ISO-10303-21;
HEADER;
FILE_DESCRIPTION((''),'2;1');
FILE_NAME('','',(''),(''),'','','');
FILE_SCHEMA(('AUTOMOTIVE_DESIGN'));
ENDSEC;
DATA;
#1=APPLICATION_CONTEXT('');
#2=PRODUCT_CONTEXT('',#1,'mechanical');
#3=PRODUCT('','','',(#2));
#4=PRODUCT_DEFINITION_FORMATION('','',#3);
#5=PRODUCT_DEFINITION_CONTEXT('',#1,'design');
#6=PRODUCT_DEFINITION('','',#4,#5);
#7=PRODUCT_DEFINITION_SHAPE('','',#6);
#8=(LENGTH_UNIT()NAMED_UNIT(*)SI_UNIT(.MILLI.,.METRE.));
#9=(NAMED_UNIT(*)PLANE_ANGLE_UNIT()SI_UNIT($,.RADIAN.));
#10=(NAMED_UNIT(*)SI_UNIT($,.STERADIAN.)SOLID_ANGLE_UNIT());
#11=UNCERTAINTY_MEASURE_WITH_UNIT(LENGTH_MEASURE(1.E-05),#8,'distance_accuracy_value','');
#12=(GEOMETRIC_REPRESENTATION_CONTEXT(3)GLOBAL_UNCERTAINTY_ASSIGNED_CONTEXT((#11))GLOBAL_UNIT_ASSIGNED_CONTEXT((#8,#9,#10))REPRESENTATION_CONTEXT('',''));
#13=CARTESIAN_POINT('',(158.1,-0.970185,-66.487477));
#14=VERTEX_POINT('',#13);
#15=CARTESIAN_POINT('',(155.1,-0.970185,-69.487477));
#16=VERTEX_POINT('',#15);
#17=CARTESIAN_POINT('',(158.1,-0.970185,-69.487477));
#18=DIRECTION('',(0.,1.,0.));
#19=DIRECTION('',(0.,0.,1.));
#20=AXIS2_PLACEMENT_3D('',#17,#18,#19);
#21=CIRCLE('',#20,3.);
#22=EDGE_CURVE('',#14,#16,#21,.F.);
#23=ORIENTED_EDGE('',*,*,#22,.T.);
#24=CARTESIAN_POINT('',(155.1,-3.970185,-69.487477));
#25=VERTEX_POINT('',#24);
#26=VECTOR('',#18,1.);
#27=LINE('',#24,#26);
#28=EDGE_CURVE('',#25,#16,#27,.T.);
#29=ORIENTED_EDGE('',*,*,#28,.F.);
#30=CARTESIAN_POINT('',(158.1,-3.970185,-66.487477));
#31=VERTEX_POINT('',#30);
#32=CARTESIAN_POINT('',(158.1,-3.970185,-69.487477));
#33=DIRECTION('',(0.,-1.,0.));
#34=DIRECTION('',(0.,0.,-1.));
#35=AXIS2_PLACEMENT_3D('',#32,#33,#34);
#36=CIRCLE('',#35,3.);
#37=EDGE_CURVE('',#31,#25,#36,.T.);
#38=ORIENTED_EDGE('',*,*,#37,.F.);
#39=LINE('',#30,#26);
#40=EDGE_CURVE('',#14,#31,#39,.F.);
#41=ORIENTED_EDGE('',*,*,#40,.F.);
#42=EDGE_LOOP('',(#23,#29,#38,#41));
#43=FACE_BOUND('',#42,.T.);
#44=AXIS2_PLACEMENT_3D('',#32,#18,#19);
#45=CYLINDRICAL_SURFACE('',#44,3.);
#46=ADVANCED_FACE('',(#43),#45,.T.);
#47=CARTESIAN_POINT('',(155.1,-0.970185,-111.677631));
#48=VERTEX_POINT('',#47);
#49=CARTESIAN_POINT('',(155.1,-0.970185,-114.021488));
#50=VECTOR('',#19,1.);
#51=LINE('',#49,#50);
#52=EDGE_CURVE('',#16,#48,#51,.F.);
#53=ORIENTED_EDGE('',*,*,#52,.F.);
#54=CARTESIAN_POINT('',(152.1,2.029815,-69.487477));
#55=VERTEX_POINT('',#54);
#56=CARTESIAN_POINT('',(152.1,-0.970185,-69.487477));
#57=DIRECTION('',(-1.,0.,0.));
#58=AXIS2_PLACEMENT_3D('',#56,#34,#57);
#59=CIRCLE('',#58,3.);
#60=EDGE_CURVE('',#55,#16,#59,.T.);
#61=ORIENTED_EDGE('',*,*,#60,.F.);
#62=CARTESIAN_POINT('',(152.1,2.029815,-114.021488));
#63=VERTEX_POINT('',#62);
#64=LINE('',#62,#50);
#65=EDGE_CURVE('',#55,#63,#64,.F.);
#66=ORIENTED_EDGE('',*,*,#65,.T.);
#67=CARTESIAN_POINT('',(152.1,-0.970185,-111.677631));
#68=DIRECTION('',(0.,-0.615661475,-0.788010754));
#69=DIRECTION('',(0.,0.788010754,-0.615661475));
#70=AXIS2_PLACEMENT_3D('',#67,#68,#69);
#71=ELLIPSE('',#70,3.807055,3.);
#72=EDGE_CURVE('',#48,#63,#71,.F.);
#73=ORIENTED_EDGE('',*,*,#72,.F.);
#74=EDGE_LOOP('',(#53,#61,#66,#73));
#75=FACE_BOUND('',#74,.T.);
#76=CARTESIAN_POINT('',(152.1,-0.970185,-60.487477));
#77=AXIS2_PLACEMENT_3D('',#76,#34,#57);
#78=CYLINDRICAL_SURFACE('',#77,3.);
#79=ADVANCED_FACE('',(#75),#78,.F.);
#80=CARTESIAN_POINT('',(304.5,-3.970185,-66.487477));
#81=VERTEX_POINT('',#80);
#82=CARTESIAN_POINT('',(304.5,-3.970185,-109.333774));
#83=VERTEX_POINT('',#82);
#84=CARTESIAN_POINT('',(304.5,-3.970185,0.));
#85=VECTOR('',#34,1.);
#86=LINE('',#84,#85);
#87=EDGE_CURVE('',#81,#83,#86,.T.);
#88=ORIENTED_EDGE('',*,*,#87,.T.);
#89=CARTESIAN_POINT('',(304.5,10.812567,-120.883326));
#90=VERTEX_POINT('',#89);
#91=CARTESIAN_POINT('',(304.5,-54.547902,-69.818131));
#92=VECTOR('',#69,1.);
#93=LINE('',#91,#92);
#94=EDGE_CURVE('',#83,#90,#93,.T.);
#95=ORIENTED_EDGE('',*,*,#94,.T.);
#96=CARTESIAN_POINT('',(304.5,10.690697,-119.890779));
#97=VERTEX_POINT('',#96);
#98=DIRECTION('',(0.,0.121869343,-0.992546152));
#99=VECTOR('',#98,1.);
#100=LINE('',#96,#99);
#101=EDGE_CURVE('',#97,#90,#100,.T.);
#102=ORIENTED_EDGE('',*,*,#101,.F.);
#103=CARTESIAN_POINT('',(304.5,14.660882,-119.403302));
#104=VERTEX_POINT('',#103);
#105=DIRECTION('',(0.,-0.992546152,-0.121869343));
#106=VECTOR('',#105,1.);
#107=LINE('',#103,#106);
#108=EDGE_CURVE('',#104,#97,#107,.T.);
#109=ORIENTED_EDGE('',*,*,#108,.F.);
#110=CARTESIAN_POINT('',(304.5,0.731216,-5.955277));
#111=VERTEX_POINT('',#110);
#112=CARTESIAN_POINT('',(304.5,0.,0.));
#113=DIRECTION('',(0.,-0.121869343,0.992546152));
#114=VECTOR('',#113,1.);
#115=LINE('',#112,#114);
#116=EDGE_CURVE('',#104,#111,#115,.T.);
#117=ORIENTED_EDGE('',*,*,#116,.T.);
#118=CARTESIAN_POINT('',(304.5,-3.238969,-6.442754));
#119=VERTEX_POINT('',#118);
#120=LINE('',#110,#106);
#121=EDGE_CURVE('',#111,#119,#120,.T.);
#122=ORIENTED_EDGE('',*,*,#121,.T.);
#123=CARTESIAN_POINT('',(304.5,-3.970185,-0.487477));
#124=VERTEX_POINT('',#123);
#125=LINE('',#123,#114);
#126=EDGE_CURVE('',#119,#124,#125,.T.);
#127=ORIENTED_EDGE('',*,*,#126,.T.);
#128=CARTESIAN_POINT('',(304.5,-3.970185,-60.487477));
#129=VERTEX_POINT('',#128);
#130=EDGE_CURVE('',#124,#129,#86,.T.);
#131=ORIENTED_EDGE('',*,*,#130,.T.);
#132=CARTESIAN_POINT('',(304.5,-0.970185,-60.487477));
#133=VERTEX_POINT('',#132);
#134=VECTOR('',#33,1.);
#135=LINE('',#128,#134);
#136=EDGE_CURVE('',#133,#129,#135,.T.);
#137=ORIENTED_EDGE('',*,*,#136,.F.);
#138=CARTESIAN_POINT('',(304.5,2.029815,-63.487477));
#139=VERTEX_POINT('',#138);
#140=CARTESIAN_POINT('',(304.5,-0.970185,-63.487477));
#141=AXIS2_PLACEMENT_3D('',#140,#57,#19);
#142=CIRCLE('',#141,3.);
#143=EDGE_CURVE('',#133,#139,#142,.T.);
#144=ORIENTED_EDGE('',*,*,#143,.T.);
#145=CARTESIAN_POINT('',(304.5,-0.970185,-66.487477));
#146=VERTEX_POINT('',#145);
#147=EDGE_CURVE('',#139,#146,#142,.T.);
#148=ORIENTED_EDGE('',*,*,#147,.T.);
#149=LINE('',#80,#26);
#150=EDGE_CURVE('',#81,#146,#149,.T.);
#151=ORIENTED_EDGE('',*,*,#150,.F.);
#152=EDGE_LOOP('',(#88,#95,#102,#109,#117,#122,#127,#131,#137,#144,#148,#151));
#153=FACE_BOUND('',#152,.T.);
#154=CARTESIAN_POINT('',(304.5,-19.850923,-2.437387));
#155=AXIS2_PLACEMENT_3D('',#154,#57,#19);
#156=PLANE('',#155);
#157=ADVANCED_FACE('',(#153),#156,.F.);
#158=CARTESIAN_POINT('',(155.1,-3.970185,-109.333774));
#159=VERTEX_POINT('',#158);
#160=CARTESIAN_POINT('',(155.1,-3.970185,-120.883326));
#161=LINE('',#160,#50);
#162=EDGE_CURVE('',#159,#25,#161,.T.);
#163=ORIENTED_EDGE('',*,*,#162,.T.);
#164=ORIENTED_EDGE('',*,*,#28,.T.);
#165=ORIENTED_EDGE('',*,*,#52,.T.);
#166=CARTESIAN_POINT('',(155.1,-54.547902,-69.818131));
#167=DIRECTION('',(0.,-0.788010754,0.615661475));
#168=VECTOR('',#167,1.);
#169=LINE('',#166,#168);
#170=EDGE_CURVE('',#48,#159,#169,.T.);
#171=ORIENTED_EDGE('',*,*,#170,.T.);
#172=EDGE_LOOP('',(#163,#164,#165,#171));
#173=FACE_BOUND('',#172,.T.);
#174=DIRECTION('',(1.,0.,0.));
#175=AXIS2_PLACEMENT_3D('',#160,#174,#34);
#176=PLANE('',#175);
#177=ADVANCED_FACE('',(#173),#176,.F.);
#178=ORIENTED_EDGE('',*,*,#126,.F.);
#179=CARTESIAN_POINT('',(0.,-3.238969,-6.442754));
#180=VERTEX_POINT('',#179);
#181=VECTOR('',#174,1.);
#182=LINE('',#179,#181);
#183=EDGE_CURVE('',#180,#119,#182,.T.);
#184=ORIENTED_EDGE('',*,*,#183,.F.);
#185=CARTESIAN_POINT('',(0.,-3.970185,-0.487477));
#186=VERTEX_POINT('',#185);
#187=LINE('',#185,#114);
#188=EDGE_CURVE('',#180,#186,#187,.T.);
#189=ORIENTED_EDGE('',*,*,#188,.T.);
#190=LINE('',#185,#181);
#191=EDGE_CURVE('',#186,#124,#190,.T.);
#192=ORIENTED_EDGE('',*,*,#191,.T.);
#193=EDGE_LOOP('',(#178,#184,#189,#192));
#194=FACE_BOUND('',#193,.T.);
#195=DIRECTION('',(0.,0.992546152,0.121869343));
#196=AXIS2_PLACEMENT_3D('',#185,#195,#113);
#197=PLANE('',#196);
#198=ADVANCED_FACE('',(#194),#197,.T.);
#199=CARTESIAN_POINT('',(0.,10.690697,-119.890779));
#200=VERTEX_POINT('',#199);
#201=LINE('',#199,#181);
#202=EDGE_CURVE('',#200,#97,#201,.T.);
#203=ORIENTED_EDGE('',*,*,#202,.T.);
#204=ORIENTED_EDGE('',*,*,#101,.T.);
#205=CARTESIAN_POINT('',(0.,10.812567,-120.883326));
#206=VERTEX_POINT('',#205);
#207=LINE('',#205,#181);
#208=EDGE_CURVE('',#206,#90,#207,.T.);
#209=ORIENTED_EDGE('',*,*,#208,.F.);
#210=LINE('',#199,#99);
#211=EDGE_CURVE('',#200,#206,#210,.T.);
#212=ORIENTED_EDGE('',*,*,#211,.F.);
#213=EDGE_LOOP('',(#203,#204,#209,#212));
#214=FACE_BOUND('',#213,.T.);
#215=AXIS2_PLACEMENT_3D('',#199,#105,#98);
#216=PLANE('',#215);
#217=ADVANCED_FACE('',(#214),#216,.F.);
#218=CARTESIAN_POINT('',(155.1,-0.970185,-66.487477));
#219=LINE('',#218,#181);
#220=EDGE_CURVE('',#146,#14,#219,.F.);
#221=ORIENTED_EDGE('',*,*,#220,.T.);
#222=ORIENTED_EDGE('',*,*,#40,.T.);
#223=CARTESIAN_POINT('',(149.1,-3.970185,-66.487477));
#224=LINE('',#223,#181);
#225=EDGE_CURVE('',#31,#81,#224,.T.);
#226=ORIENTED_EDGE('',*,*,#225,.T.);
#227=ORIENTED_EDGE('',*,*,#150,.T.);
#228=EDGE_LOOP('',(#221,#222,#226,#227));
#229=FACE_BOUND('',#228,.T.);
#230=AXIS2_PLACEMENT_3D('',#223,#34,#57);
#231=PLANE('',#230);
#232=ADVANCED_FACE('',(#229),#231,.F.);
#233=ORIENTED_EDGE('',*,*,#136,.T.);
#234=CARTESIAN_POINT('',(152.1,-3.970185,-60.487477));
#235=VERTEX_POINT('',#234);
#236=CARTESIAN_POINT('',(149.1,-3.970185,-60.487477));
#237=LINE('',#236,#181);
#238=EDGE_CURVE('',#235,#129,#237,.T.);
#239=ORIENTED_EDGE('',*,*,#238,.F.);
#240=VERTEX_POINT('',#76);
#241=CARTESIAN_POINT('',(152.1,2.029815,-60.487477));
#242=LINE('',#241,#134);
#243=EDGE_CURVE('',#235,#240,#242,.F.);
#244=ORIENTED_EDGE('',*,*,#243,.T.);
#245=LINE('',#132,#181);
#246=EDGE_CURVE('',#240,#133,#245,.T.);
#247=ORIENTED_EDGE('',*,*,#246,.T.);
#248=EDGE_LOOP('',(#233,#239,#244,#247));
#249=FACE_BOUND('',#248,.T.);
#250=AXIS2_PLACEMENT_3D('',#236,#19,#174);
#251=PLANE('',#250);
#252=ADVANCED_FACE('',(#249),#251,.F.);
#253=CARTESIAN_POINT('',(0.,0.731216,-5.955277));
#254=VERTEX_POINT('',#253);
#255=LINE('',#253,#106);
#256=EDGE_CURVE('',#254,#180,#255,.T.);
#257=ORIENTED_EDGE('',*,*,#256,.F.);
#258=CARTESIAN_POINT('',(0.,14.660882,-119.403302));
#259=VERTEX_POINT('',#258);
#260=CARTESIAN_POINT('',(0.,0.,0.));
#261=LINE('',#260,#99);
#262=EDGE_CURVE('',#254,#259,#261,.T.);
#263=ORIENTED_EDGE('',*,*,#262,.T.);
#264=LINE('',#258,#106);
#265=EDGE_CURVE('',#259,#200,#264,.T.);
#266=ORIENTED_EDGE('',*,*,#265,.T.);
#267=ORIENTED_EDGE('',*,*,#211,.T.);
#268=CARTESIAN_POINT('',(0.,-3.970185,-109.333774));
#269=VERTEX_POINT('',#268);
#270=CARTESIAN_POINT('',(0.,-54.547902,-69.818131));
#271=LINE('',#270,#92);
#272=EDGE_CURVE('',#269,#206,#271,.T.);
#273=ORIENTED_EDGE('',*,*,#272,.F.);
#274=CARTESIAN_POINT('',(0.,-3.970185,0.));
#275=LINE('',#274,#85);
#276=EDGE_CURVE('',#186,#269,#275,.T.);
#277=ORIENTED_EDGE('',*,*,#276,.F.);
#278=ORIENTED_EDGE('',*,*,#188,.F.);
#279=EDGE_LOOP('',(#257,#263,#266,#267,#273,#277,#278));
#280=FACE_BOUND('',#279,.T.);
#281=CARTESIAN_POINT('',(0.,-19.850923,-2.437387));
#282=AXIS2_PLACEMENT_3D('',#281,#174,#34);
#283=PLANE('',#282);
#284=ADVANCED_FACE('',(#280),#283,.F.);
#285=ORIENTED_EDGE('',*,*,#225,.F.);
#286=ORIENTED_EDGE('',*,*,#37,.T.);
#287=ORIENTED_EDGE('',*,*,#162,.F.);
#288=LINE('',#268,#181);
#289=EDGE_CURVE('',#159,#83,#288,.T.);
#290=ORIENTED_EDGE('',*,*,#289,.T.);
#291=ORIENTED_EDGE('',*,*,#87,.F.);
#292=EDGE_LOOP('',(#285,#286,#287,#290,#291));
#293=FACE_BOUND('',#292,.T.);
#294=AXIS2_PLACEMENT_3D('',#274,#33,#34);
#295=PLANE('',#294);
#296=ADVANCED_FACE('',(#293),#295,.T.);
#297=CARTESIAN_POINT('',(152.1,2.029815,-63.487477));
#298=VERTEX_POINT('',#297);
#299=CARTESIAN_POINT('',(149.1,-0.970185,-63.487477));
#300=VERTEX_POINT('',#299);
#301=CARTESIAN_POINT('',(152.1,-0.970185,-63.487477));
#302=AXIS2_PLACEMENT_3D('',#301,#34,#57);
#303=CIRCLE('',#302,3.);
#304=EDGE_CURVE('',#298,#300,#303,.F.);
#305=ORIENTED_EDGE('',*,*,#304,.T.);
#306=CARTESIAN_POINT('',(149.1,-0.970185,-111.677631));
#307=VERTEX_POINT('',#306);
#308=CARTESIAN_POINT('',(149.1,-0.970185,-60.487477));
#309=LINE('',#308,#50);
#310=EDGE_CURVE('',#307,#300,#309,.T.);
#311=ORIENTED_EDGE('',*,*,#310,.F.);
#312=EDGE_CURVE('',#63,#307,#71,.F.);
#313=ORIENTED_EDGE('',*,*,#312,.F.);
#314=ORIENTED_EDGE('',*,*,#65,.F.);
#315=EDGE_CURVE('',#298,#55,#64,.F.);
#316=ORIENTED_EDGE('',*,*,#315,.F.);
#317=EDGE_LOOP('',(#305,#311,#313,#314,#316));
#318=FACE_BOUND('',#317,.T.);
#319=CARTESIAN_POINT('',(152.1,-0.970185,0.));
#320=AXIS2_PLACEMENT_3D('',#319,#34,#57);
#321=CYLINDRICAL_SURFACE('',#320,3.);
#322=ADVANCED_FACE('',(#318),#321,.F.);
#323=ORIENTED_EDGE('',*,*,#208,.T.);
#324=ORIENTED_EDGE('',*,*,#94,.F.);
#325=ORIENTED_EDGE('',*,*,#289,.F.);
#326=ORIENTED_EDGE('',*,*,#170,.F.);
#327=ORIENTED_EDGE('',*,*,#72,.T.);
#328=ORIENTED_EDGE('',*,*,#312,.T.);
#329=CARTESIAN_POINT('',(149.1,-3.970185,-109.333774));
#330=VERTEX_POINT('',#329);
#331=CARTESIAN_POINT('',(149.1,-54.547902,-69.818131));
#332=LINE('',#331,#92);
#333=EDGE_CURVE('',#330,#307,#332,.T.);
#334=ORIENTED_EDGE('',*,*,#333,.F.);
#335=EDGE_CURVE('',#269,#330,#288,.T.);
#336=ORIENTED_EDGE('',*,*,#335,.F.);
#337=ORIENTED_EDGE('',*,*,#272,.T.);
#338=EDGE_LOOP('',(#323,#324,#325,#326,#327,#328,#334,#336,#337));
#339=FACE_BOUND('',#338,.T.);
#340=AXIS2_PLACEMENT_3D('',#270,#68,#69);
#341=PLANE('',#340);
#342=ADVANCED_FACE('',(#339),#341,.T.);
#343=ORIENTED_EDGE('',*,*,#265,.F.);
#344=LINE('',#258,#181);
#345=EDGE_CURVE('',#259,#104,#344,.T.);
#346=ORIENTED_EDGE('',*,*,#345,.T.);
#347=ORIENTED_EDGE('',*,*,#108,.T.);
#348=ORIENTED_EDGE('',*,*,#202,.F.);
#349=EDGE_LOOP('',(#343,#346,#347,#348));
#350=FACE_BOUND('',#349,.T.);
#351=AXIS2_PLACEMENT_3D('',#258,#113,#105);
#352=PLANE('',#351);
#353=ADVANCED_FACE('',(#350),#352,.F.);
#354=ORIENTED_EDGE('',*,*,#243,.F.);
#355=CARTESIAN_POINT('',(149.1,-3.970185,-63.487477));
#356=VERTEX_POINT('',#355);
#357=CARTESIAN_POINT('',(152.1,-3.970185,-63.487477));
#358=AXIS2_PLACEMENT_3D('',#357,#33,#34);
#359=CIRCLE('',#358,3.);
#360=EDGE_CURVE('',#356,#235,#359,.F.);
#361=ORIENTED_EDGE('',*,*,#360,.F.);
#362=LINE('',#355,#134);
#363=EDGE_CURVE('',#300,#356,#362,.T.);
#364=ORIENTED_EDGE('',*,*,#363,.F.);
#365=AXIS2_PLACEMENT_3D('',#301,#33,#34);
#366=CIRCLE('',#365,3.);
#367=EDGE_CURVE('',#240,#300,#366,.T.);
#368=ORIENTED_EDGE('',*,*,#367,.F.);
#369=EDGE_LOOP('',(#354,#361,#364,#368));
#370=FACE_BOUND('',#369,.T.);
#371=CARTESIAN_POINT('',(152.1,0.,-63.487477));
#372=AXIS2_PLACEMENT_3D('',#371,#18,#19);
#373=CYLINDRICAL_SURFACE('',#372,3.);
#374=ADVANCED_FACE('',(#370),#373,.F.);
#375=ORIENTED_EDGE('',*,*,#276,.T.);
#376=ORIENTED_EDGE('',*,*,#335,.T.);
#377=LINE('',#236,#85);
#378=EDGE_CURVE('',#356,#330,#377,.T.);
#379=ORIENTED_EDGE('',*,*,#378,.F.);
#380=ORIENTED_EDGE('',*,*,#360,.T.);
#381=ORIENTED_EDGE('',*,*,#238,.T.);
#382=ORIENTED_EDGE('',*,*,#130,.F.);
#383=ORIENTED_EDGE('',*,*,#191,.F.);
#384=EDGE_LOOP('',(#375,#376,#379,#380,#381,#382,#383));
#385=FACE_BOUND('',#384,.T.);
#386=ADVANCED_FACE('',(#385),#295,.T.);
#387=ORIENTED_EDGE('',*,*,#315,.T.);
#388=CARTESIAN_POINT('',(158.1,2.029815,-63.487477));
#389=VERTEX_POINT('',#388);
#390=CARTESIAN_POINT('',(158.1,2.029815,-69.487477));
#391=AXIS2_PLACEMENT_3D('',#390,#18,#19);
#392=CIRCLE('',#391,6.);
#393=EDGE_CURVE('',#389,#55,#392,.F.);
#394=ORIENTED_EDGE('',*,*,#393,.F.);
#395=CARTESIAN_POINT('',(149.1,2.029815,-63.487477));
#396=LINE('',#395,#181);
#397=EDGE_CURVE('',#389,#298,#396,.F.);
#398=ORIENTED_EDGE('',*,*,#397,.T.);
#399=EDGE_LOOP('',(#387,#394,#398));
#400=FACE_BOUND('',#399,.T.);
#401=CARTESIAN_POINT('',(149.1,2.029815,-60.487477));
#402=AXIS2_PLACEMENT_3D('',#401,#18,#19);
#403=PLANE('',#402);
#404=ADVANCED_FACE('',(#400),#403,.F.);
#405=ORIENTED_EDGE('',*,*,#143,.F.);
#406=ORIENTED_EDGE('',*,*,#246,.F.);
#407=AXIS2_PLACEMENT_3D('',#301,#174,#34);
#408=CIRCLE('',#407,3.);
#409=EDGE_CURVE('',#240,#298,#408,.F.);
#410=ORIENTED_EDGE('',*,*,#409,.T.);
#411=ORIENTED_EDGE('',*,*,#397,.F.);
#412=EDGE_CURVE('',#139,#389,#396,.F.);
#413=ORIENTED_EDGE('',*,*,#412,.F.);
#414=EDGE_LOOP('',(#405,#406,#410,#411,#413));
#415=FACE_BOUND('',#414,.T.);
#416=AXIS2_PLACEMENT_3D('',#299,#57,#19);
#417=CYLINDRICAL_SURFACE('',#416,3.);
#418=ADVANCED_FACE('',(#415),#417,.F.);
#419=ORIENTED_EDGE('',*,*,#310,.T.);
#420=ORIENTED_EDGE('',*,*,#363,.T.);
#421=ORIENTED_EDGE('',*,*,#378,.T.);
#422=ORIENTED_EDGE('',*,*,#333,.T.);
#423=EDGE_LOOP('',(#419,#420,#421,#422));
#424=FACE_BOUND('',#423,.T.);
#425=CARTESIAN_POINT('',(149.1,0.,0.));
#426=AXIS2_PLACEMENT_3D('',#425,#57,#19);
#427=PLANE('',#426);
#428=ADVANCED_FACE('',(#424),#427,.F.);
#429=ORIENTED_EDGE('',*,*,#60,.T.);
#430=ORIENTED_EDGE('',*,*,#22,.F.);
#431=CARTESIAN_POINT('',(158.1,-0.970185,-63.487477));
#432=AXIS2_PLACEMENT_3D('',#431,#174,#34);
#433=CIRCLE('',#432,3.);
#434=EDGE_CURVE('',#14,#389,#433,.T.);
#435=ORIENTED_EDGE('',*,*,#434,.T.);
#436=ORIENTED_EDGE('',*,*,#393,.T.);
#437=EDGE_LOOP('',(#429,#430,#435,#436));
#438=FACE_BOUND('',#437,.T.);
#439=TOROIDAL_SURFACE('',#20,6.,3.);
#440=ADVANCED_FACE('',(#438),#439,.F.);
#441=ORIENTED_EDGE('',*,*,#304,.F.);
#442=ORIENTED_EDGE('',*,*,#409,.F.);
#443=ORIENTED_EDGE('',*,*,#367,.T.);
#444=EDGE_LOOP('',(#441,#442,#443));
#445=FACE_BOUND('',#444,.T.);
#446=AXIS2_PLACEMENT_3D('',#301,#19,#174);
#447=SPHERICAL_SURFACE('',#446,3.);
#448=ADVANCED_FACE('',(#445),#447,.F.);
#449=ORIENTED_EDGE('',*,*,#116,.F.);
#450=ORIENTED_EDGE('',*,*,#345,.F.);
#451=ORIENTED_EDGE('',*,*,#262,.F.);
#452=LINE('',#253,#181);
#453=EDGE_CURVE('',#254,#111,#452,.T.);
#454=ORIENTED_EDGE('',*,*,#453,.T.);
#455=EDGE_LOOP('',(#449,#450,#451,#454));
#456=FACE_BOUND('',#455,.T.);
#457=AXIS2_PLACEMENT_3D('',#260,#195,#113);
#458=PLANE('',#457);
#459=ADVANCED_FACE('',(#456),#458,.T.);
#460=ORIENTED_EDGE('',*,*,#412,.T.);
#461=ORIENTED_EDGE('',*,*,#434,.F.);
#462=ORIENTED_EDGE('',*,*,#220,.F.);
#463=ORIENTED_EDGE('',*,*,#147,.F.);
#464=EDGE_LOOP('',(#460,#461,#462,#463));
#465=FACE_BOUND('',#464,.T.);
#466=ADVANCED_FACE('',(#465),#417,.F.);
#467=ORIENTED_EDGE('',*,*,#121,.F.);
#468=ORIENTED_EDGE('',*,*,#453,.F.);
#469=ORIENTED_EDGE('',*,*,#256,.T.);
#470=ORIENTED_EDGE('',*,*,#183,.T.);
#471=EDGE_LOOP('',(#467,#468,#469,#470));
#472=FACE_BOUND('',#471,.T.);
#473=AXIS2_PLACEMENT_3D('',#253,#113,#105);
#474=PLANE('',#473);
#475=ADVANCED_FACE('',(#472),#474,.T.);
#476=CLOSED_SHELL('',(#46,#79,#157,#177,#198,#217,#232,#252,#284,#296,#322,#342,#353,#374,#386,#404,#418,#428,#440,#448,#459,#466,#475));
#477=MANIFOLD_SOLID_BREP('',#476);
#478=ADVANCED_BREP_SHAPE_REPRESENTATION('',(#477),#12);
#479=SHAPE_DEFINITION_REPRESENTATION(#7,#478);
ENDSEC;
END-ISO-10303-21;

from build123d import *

# Parameters (mm, degrees)
SKETCH2_W           = 121.3
SKETCH2_H           = 304.5
BOSS_EXTRUDE1_DEPTH = 20
CUT_EXTRUDE2_DEPTH  = 329.94119958
SKETCH6_W           = 6
SKETCH6_H           = 6
CUT_EXTRUDE3_DEPTH  = 155.4
SKETCH8_W           = 6
SKETCH8_H           = 6
CUT_EXTRUDE4_DEPTH  = 312.915359451
FILLET2_R           = 3


with BuildPart() as part:
    # Sketch2 → Boss-Extrude1 (new body)
    with BuildSketch(Plane(origin=(0, 0, 0), x_dir=(0, 0.12186934340514809, -0.992546151641322), z_dir=(0, -0.992546151641322, -0.12186934340514809))):
        with Locations((60.65, 152.25)):
            Rectangle(SKETCH2_W, SKETCH2_H)
    extrude(amount=BOSS_EXTRUDE1_DEPTH)

    # Sketch4 → Cut-Extrude2 (cut, through all)
    with BuildSketch(Plane(origin=(304.5, 0, 0), x_dir=(0, 0, -1), z_dir=(1, 0, 0))):
        Polygon((109.333774414, -3.970184607), (0.487477374, -3.970184607), (2.437386868, -19.850923033), (122.833235062, -5.068171678), (120.883325568, 10.812566748), align=None)
        Polygon((5.95527691, 0.73121606), (0, 0), (0.487477374, -3.970184607), (6.442754283, -3.238968546), align=None)
        Polygon((120.883325568, 10.812566748), (120.395848194, 14.782751355), (119.403302042, 14.660882012), (119.890779416, 10.690697405), align=None)
    extrude(amount=-CUT_EXTRUDE2_DEPTH, mode=Mode.SUBTRACT)

    # Sketch6 → Cut-Extrude3 (cut)
    with BuildSketch(Plane(origin=(304.5, 0, 0), x_dir=(0, 0, -1), z_dir=(1, 0, 0))):
        with Locations((63.487477374, -0.970184607)):
            Rectangle(SKETCH6_W, SKETCH6_H)
    extrude(amount=-CUT_EXTRUDE3_DEPTH, mode=Mode.SUBTRACT)

    # Sketch8 → Cut-Extrude4 (cut, through all)
    with BuildSketch(Plane.XY.offset(-66.487477374)):
        with Locations((152.1, -0.970184607)):
            Rectangle(SKETCH8_W, SKETCH8_H)
    extrude(amount=-CUT_EXTRUDE4_DEPTH, mode=Mode.SUBTRACT)

    # Fillet2
    fillet2_edges = [part.edges().sort_by_distance(p)[0] for p in [
        (155.1, 2.029815393, -90.254482773),
        (149.1, 2.029815393, -87.254482773),
        (229.8, 2.029815393, -66.487477374),
        (226.8, 2.029815393, -60.487477374),
        (155.1, -0.970184607, -66.487477374),
        (149.1, -0.970184607, -60.487477374),
    ]]
    fillet(fillet2_edges, radius=FILLET2_R - 0.0001)  # a hair under: the kernel refuses the full size


solid = part.part
